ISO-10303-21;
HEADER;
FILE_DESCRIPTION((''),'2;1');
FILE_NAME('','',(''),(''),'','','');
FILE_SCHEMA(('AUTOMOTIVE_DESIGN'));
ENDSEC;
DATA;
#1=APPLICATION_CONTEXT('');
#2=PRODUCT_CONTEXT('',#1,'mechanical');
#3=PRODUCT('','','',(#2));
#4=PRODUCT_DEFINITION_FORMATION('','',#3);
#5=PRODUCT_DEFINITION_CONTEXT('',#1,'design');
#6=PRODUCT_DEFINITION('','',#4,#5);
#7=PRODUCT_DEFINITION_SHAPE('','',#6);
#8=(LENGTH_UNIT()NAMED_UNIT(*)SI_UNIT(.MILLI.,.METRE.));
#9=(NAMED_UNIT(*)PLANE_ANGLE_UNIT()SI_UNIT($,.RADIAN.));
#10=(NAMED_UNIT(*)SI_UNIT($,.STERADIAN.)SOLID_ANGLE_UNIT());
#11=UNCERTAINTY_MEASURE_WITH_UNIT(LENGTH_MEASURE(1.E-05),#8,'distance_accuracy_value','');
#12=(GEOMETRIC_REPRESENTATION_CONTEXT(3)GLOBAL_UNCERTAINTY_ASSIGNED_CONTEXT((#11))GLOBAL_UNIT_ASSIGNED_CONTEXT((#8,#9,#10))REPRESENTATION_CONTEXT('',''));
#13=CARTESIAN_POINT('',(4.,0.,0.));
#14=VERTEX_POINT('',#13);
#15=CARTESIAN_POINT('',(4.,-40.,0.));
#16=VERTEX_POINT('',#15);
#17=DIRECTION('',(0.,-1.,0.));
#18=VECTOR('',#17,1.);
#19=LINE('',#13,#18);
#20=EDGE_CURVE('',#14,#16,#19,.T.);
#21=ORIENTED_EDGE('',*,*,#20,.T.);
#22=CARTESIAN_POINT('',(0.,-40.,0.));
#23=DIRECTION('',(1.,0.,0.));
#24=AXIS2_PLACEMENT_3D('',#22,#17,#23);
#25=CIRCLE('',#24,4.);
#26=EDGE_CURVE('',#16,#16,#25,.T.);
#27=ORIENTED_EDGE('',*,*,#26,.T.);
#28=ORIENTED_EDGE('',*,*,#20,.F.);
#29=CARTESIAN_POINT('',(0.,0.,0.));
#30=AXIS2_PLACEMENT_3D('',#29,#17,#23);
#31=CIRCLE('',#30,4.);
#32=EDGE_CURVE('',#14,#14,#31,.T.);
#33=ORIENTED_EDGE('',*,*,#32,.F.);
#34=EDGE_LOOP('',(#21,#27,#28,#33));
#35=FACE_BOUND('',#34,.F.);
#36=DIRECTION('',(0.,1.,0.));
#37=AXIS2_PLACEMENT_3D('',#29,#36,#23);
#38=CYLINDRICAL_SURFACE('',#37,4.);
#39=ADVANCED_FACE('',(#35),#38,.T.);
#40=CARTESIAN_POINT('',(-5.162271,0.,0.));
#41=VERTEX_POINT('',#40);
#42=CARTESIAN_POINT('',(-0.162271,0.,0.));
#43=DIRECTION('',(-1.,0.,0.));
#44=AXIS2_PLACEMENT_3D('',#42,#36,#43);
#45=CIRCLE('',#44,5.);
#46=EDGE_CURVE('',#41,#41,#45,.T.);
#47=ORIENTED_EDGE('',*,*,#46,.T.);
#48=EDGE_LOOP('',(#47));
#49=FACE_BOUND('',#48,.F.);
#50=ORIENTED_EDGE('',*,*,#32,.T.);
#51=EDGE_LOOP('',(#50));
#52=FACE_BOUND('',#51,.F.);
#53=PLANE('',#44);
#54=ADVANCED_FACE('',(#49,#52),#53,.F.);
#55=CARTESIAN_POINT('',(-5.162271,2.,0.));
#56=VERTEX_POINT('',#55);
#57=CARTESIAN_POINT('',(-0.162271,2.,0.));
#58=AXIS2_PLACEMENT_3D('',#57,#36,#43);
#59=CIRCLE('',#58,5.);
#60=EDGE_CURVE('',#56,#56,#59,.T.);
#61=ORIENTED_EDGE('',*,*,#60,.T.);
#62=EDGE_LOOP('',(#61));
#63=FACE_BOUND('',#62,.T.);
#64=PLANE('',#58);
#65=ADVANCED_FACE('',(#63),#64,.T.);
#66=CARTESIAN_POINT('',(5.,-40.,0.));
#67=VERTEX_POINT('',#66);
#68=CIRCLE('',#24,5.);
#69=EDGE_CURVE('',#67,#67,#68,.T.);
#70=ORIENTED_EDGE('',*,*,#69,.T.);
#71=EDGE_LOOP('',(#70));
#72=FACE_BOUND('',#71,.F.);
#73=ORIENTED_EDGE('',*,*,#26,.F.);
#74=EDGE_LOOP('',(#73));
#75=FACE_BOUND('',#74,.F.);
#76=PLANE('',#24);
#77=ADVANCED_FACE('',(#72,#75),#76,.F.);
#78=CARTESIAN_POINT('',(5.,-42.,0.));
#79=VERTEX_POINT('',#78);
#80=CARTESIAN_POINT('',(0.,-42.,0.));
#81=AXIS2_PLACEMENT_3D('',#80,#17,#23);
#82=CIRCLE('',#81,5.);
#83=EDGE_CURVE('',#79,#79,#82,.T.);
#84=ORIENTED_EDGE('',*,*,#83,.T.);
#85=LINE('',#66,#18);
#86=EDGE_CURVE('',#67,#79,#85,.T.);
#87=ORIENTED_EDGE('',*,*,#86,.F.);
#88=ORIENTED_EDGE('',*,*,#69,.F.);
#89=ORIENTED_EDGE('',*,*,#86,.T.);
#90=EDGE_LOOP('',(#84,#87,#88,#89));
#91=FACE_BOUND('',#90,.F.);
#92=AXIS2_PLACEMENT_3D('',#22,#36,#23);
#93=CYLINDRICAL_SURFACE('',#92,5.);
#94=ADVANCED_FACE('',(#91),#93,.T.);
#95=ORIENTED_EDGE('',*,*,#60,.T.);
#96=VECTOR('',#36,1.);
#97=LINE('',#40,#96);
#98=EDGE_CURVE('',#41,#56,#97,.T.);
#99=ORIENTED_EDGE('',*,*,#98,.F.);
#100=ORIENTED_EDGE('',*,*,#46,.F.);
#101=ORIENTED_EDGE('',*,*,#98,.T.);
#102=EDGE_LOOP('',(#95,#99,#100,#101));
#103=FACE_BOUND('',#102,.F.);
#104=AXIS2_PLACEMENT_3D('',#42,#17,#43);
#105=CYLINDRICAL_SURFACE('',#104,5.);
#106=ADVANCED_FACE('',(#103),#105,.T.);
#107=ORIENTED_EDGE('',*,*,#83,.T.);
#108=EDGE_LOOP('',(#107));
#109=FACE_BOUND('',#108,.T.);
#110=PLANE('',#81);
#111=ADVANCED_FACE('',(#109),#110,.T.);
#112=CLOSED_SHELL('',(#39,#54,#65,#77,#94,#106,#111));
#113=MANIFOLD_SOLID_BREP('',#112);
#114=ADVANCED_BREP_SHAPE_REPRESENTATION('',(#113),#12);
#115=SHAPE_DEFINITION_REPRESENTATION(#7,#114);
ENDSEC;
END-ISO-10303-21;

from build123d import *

# Parameters (mm, degrees)
F0_R     = 4
F1_DEPTH = 40
F2_R     = 5
F2_R_2   = 4
F3_DEPTH = 2
F4_R     = 5
F4_R_2   = 4
F5_DEPTH = 2


with BuildPart() as f1:
    # F0 (on Front) → F1 (new body)
    with BuildSketch(Plane.XZ):
        Circle(F0_R)
    extrude(amount=F1_DEPTH)

    # F2 (on face) → F3 (join)
    with BuildSketch(Plane.XZ.offset(40)):
        Circle(F2_R)
        Circle(F2_R_2, mode=Mode.SUBTRACT)
        Circle(F2_R_2)
    extrude(amount=F3_DEPTH)

    # F4 (on face) → F5 (join)
    with BuildSketch(Plane(origin=(0, 0, 0), x_dir=(-1, 0, 0), z_dir=(0, 1, 0))):
        with Locations((0.1622709678, 0)):
            Circle(F4_R)
        Circle(F4_R_2, mode=Mode.SUBTRACT)
        Circle(F4_R_2)
    extrude(amount=F5_DEPTH)


solid = f1.part
